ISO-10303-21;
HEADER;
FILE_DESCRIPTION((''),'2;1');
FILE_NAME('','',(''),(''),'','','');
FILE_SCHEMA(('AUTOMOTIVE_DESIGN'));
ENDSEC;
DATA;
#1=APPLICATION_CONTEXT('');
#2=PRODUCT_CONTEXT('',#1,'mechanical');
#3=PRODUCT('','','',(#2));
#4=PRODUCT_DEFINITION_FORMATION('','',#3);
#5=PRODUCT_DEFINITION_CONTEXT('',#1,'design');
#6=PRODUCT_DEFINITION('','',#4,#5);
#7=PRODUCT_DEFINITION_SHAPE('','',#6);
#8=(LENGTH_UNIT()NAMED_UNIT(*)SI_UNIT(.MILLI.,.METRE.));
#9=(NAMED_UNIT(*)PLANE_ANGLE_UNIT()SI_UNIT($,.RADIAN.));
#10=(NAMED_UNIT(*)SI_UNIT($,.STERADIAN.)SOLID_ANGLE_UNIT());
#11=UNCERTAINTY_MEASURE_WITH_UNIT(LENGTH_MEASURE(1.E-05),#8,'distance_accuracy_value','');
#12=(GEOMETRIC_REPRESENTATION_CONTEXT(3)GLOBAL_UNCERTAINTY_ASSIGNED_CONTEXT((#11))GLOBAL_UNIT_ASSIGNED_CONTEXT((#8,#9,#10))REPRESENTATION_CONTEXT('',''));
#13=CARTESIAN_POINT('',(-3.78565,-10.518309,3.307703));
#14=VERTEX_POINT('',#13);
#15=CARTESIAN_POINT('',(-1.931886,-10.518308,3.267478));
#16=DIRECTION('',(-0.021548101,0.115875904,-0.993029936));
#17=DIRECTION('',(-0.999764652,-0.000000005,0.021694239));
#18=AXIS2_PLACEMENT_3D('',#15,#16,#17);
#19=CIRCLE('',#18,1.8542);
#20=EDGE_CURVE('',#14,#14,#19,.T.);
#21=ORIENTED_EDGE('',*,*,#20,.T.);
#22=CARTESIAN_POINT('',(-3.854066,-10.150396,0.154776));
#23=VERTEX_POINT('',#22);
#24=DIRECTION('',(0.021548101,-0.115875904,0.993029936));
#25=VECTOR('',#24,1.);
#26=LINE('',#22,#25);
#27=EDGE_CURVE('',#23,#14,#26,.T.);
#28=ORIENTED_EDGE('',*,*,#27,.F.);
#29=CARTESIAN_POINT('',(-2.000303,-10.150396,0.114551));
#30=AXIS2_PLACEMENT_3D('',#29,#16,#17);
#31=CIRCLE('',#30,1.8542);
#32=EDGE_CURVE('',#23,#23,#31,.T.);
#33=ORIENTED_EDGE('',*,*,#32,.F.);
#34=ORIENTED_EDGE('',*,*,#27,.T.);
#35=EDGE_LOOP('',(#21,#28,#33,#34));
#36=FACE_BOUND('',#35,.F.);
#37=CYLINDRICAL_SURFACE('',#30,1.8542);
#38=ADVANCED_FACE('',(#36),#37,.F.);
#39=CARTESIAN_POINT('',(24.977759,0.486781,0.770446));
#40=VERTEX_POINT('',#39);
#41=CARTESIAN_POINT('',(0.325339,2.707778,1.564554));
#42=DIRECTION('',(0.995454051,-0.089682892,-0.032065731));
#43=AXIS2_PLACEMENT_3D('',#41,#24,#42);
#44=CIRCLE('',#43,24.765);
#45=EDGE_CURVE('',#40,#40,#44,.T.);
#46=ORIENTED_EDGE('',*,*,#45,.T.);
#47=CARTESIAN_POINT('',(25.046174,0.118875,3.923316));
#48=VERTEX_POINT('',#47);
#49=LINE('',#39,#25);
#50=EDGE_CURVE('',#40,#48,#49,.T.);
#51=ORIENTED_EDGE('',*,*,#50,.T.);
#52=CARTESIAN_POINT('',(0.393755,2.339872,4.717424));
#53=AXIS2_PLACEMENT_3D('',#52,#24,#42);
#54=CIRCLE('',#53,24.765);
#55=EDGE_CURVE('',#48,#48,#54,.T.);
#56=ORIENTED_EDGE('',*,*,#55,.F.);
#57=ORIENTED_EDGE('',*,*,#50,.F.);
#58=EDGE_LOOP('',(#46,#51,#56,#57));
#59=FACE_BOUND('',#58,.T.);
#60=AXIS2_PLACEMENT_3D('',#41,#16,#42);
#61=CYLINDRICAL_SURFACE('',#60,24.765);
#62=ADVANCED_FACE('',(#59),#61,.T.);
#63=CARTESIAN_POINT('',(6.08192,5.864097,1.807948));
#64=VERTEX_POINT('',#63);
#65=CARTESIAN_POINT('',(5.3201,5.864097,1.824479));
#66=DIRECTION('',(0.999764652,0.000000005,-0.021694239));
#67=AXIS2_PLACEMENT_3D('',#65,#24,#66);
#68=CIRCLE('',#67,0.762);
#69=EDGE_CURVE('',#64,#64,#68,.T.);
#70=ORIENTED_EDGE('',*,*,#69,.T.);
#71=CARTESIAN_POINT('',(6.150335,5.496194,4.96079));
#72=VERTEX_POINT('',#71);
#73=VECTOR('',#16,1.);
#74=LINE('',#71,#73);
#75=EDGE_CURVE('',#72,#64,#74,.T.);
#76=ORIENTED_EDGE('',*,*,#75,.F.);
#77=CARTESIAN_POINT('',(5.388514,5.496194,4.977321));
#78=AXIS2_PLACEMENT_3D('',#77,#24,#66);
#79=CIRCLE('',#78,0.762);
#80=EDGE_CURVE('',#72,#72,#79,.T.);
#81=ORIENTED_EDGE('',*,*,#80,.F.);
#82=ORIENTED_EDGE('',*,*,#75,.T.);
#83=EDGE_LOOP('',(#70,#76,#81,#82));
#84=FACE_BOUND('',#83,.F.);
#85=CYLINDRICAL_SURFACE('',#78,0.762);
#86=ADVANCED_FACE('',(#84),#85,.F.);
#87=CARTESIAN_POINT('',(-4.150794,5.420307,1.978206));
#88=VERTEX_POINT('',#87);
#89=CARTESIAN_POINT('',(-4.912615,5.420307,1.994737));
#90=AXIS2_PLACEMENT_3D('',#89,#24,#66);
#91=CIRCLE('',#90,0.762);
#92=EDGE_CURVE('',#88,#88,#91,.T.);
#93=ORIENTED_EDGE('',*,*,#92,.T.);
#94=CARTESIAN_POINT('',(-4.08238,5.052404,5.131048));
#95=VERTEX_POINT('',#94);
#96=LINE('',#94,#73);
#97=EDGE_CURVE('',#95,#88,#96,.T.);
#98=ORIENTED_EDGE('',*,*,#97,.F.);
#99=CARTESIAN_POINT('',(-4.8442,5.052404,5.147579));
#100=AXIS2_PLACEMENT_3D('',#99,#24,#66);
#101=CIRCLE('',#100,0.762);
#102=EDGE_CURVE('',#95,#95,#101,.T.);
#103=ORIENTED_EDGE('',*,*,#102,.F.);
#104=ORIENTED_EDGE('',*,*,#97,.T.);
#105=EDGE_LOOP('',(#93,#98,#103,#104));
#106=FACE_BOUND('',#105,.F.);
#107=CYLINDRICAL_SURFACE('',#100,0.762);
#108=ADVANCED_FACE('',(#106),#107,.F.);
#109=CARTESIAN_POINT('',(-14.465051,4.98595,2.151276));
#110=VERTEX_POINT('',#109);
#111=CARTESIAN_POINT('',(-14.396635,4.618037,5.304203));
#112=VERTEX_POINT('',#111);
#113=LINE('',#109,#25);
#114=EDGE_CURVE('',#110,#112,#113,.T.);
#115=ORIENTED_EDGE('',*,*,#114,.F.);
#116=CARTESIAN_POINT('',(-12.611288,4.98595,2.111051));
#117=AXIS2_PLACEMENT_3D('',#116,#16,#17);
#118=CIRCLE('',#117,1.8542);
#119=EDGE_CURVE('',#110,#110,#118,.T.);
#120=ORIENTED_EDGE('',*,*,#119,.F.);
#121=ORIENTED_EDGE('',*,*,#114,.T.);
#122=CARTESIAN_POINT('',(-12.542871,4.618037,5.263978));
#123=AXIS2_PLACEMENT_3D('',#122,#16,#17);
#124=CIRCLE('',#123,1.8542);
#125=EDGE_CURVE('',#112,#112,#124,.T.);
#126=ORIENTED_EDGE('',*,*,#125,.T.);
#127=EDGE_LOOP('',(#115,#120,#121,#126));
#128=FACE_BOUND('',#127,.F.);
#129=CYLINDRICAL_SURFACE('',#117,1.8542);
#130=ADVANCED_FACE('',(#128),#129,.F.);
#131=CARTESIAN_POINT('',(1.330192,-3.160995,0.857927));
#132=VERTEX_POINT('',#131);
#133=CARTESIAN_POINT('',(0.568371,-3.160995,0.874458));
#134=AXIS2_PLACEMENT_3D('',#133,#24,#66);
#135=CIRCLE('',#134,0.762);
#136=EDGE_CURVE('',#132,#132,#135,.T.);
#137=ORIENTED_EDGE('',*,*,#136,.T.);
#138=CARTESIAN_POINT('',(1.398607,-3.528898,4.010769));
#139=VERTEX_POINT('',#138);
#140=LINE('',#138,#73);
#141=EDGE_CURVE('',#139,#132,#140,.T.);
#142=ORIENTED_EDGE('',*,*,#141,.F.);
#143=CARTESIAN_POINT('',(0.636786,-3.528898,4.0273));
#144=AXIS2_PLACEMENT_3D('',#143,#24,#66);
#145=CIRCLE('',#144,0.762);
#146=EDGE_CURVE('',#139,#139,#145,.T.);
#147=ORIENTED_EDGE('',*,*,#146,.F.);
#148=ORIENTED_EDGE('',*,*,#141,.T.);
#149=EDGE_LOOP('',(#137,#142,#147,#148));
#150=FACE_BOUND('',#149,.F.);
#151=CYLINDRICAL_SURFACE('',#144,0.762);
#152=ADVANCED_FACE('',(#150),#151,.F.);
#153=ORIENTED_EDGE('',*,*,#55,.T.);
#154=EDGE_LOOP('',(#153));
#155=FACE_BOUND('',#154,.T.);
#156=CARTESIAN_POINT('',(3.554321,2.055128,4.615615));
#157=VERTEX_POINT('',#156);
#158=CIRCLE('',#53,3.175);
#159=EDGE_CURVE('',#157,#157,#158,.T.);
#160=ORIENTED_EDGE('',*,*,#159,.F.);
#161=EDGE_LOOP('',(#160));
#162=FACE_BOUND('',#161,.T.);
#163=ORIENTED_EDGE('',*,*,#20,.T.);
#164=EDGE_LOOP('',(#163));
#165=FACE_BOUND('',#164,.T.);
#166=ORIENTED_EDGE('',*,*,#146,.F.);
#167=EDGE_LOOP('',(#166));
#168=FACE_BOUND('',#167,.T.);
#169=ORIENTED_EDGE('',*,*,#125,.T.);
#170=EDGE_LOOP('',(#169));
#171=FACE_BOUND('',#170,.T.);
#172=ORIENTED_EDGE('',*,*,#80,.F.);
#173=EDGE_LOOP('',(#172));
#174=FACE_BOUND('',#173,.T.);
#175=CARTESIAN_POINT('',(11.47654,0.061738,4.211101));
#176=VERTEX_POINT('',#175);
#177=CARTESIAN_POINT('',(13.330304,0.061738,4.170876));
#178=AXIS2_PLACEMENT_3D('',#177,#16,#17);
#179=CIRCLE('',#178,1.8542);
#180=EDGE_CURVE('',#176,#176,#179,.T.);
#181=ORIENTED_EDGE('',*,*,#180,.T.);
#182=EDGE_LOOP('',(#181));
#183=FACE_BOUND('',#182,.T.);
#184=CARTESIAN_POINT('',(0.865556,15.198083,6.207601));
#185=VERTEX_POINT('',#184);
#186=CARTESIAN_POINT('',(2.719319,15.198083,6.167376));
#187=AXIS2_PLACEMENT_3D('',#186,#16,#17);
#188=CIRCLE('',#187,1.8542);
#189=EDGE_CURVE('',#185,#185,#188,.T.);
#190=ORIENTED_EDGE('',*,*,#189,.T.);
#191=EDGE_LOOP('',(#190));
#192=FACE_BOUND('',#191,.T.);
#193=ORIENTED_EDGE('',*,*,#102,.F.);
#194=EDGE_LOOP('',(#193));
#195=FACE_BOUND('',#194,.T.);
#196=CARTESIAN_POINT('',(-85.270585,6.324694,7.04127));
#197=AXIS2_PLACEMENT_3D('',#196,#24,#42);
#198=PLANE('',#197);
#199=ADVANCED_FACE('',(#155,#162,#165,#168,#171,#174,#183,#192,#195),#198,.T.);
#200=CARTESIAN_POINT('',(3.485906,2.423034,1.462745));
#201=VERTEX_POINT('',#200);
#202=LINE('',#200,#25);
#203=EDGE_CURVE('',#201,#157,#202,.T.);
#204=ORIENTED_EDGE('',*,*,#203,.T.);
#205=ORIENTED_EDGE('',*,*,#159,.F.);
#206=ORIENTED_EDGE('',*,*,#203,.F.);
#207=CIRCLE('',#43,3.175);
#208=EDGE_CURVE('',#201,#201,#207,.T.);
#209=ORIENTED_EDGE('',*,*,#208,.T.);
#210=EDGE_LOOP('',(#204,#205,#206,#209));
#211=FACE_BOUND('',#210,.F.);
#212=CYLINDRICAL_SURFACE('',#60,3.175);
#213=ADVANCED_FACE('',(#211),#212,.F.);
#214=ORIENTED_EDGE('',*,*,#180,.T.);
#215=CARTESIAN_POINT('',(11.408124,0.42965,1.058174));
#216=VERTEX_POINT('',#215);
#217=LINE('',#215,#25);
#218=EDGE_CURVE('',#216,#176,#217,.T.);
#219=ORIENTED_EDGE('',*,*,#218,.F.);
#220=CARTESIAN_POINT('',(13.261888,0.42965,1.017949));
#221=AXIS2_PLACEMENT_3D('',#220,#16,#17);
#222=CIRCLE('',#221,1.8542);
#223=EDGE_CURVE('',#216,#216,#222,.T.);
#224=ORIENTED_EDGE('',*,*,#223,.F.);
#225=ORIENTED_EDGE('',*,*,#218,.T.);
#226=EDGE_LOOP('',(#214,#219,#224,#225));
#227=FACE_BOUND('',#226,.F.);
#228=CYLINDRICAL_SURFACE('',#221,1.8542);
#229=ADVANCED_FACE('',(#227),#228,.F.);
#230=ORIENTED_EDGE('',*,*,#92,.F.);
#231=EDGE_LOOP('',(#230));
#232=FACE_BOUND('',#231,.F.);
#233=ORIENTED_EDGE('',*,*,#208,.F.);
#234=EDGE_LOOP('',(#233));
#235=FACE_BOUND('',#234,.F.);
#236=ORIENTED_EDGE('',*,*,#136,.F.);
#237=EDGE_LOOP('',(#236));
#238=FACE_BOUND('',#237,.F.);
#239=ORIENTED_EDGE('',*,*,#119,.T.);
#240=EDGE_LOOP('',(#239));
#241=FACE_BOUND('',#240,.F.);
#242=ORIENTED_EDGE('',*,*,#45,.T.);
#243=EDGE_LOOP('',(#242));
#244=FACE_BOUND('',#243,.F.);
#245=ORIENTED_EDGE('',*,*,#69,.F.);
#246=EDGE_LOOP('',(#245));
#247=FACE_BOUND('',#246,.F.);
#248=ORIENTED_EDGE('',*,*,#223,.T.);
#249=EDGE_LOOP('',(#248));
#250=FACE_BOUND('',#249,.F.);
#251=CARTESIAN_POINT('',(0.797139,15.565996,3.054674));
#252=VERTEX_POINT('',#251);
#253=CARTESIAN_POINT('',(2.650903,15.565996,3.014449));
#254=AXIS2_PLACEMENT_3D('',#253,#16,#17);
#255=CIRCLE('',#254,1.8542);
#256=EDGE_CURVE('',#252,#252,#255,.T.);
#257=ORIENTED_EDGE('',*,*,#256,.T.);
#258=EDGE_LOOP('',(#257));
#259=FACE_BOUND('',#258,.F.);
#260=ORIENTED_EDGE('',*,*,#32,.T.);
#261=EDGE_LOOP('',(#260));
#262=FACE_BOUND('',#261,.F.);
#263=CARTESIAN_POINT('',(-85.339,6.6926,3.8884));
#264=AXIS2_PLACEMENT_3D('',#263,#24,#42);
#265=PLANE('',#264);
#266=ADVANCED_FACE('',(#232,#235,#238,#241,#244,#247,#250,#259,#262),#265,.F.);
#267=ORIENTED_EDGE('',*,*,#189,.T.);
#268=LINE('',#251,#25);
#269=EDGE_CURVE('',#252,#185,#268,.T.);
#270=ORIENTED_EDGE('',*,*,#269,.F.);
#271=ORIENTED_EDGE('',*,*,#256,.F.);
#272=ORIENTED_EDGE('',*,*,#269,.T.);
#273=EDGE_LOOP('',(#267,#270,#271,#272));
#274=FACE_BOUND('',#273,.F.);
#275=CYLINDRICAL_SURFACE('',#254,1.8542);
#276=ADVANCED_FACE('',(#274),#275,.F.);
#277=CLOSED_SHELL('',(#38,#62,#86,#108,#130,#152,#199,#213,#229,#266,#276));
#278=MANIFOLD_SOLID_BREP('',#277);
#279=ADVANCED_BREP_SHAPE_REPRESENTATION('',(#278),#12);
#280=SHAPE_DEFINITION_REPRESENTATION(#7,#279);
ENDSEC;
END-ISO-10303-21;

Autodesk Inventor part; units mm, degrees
ref_plane "YZ Plane" through (0, 0, 0) normal (1, 0, 0) x (0, 1, 0)
ref_plane "XZ Plane" through (0, 0, 0) normal (0, 1, 0) x (-1, 0, 0)
ref_plane "Work Plane1" through (-85.339, 6.6926, 3.8884) normal (0.0215481, -0.1158759, 0.9930299) x (0.9954541, -0.0896829, -0.0320657)
sketch "Sketch1" plane through (-85.339, 6.6926, 3.8884) normal (0.0215481, -0.1158759, 0.9930299) x (0.9954541, -0.0896829, -0.0320657)
  circle A0 centre (85.7068, 3.742) radius 3.175 projected
  circle A1 centre (85.7068, 3.742) radius 24.765
  point P0 (85.676, 0.8558)
  dimension "d0" = 49.53
extrude "Extrusion1" add sketch "Sketch1" along normal blind 3.175
sketch "Sketch2" plane through (0.3253, 2.7078, 1.5645) normal (-0.0215481, 0.1158759, -0.9930299) x (-0.9997647, 0, 0.0216942)
  circle A0 centre (12.9454, 2.2936) radius 1.8542
  circle A1 centre (-2.2936, 12.9454) radius 1.8542
  circle A2 centre (-12.9454, -2.2936) radius 1.8542
  circle A3 centre (2.2936, -12.9454) radius 1.8542
extrude "Extrusion2" cut sketch "Sketch2" against normal through all
sketch "Sketch3" plane through (0.3937, 2.3399, 4.7174) normal (0.0215481, -0.1158759, 0.9930299) x (0.9997647, 0, -0.0216942)
  circle A0 centre (-5.246, 2.7309) radius 0.762 projected
  circle A1 centre (4.988, 3.1777) radius 0.762 projected
  circle A2 centre (0.258, -5.9086) radius 0.762 projected
extrude "Extrusion3" cut sketch "Sketch3" against normal through all
properties part number "gearSpacerDisc01"
